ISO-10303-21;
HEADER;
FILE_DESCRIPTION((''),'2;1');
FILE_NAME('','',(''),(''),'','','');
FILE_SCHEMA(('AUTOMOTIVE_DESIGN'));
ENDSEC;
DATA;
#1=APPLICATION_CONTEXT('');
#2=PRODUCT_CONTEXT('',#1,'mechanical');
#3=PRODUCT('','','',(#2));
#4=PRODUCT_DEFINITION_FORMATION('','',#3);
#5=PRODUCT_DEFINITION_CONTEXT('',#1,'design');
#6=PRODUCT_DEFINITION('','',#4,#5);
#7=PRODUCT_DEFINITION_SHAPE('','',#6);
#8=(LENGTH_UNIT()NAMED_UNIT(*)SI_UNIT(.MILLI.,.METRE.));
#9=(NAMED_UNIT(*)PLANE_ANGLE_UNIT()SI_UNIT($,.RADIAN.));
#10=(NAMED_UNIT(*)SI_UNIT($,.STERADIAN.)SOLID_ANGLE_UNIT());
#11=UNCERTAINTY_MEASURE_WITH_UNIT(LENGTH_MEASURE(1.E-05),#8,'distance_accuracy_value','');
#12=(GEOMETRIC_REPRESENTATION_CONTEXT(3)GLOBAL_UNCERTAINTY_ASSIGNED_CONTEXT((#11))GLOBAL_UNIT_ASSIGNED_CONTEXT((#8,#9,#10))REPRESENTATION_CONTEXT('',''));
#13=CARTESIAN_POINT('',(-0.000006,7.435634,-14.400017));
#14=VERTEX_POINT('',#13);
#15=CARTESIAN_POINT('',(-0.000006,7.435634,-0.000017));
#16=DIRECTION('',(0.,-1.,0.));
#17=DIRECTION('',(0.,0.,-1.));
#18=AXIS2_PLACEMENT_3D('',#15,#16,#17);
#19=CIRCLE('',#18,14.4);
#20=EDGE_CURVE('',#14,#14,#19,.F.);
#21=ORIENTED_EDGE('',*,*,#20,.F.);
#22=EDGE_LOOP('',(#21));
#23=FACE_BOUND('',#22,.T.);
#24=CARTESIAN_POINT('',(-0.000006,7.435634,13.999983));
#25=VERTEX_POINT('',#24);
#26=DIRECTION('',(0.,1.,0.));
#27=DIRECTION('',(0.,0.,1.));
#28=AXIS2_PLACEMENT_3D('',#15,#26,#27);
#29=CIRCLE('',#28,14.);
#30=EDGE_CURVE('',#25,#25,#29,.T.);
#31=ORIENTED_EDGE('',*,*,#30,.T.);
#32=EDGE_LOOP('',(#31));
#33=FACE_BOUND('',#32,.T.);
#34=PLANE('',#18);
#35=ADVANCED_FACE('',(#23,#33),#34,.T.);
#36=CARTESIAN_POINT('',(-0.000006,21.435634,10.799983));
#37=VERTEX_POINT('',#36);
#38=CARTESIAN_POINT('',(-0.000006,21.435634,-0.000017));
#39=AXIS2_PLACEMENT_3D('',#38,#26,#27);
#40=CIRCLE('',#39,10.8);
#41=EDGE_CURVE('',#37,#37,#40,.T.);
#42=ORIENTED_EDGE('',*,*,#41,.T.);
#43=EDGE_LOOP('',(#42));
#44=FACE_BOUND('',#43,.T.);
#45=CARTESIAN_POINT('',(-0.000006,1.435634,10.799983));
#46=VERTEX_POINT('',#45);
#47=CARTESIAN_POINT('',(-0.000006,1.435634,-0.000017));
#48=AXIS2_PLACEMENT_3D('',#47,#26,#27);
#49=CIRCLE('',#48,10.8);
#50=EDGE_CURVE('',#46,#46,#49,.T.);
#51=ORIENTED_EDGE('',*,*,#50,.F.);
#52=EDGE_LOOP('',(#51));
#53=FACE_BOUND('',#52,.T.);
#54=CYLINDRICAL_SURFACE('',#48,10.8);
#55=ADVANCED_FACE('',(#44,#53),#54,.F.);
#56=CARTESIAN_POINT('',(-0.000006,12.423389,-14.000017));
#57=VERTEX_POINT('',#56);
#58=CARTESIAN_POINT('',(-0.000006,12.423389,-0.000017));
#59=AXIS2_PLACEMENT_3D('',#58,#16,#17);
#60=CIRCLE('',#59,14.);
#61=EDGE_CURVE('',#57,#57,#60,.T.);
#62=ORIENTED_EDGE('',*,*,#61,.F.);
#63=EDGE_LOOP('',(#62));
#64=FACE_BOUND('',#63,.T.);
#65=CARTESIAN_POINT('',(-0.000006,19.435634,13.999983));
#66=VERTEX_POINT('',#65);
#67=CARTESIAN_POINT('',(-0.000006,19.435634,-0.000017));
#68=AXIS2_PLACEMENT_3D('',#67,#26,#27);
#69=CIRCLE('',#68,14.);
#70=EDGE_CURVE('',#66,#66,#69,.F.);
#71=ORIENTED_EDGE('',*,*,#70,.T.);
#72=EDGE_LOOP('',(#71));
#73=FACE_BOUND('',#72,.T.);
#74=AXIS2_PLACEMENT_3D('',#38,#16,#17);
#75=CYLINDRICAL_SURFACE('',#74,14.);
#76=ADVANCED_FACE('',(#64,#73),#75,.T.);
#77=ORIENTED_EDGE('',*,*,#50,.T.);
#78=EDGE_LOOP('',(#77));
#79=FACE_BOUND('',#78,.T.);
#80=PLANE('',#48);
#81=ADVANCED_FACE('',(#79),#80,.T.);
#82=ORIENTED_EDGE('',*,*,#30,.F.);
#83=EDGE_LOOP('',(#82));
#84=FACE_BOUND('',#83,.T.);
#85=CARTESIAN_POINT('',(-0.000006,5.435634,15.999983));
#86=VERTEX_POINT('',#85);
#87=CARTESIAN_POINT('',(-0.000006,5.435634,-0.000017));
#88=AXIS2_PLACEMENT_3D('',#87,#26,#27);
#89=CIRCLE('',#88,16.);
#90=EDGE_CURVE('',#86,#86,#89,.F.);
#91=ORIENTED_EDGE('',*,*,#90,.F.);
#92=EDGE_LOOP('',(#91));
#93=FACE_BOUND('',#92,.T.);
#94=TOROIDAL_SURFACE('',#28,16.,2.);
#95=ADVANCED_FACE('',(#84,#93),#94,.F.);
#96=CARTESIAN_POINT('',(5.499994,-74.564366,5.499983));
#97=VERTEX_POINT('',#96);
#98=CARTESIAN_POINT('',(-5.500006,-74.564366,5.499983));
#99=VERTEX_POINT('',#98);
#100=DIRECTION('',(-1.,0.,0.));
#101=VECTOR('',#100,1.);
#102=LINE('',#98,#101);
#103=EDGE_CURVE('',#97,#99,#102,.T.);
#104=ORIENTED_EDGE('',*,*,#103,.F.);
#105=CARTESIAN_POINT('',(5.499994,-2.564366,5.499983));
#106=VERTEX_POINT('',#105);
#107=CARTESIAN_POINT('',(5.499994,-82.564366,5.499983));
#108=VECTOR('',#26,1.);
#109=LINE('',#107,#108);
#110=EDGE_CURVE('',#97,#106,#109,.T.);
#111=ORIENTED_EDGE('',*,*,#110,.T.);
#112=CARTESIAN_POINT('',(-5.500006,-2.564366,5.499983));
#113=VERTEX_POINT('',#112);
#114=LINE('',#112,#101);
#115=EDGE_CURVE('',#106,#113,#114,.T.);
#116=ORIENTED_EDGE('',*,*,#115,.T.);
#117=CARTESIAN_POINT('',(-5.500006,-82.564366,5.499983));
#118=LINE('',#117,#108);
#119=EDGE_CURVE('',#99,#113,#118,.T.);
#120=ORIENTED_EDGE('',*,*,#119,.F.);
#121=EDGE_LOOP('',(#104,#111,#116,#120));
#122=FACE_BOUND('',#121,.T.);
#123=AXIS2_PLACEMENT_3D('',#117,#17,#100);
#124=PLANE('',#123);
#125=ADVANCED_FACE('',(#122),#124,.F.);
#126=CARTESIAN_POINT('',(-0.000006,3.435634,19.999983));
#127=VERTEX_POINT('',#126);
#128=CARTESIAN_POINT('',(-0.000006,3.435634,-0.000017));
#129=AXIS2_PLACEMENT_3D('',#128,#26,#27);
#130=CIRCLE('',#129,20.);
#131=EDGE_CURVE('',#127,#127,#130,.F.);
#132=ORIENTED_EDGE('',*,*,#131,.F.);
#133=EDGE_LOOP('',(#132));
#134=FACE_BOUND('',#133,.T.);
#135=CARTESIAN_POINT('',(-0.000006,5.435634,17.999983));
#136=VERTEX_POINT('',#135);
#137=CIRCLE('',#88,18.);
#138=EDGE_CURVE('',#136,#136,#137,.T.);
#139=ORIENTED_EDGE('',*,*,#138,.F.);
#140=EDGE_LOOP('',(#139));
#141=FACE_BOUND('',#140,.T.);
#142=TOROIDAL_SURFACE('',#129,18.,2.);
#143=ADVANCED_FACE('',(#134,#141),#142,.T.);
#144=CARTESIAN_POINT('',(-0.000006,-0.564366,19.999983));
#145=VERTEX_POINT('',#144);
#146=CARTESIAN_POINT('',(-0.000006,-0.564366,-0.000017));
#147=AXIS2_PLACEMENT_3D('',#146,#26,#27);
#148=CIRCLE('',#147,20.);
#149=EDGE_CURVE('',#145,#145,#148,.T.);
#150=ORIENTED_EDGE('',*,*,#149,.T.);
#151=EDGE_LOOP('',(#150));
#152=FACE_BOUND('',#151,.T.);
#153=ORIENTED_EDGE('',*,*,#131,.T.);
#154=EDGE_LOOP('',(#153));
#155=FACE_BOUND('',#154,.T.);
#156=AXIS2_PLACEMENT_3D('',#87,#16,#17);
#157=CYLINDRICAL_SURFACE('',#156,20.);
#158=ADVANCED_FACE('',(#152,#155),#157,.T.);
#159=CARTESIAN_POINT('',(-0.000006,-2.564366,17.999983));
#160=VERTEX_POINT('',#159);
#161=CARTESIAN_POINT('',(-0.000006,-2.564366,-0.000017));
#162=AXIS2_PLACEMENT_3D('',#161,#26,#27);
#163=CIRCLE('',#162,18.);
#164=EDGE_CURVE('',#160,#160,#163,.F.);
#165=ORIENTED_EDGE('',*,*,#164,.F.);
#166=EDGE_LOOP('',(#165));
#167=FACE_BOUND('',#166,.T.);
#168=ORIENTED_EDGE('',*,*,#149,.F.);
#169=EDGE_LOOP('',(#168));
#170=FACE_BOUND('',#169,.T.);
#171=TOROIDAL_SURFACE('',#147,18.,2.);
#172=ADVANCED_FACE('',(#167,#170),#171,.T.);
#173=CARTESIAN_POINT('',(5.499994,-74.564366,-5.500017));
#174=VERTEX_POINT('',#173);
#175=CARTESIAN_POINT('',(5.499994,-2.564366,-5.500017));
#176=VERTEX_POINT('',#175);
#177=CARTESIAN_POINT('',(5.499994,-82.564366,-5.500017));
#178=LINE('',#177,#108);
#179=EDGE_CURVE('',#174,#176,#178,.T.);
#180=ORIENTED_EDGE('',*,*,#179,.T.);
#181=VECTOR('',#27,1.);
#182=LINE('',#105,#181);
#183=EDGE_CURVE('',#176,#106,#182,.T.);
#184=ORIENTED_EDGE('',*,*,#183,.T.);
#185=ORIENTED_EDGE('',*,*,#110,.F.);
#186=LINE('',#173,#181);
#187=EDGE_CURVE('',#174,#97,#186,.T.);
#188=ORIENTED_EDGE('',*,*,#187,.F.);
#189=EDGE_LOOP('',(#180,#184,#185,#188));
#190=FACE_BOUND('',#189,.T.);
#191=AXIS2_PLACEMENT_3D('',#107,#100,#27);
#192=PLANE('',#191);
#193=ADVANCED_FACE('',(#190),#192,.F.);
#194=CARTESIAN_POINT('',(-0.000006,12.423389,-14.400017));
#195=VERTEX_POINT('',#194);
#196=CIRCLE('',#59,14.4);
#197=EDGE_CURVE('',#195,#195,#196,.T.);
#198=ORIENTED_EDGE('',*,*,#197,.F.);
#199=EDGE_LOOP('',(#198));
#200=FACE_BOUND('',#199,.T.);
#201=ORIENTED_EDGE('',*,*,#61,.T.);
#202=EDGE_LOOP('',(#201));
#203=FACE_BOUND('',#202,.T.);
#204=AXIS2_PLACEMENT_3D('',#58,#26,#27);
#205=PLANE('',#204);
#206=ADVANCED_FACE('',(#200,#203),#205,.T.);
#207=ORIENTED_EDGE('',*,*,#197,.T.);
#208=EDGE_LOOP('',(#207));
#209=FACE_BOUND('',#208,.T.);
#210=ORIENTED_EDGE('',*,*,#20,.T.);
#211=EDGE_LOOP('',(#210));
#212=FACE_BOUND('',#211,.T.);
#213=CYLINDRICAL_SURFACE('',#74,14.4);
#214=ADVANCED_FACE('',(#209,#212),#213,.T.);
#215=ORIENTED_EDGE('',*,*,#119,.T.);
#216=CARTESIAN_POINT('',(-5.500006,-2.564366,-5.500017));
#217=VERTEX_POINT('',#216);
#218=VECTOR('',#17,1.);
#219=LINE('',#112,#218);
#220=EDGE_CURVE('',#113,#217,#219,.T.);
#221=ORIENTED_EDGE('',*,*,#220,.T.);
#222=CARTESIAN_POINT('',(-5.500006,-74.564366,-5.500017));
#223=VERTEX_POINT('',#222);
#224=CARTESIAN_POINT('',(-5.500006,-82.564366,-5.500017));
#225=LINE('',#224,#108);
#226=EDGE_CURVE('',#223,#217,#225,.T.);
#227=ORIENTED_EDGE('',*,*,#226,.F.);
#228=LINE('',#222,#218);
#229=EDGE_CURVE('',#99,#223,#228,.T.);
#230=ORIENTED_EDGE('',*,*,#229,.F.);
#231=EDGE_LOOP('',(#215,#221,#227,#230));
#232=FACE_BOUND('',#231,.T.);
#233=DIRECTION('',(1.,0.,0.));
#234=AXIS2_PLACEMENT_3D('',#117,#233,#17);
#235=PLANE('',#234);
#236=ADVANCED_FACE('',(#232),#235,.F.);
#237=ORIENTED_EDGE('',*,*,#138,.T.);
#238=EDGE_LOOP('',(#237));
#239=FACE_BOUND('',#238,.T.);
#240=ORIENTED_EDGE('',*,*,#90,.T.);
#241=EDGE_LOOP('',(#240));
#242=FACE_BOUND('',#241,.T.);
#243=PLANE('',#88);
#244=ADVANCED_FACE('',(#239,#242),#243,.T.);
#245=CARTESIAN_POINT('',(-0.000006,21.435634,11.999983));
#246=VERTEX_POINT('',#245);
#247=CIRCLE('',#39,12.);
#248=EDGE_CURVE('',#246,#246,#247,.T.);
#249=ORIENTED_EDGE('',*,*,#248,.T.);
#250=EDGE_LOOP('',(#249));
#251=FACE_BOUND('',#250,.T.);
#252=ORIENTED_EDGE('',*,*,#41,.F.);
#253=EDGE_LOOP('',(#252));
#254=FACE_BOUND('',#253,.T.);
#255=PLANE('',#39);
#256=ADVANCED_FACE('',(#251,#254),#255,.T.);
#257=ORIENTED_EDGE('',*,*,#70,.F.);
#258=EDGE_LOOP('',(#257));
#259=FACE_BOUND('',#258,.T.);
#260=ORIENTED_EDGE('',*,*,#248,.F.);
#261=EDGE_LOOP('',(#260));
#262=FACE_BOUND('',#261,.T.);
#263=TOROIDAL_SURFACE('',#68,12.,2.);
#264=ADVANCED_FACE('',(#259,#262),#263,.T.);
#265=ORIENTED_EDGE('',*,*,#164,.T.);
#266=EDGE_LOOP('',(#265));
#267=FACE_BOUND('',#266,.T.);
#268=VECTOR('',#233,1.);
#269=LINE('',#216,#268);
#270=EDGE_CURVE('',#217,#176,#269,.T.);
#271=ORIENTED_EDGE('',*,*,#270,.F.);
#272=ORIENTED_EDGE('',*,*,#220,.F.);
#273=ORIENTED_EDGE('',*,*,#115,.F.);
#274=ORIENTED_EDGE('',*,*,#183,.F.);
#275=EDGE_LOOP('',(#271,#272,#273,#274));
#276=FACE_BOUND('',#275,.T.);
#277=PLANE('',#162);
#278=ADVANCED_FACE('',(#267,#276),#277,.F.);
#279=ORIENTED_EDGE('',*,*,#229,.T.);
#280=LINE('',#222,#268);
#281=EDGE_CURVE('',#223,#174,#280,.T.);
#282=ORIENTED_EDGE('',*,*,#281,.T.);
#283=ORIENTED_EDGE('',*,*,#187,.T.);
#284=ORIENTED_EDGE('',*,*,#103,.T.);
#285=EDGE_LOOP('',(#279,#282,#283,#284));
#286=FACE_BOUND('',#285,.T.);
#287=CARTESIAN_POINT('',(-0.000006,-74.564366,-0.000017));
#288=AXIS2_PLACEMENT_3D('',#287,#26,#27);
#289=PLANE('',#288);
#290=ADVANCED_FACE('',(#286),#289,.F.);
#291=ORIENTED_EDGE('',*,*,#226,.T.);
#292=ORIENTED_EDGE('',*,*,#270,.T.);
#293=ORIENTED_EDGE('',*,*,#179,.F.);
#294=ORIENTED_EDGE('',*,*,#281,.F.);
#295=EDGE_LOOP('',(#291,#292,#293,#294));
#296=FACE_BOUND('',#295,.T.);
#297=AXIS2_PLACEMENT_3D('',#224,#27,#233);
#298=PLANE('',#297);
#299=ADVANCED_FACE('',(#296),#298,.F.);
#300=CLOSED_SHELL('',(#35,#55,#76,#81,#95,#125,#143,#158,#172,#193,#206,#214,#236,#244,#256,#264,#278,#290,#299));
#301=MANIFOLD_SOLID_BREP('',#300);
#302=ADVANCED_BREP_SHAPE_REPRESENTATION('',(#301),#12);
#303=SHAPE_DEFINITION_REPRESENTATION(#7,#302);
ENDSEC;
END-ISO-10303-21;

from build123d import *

# Parameters (mm, degrees)
SKETCH2_R           = 25
BOSS_EXTRUDE1_DEPTH = 10
SKETCH3_R           = 17.5
BOSS_EXTRUDE3_DEPTH = 20
SKETCH4_R           = 13.5
CUT_EXTRUDE1_DEPTH  = 25
SKETCH5_W           = 13.75
SKETCH5_H           = 13.75
BOSS_EXTRUDE4_DEPTH = 100
FILLET2_R           = 2.5
FILLET3_R           = 2.5
WRAP1_START         = 12.5
WRAP1_OUTLINE_R     = 18
WRAP1_OUTLINE_R_2   = 17.5
WRAP1_DEPTH         = 6.23469337
SKETCH8_W           = 13.75
SKETCH8_H           = 13.75
CUT_EXTRUDE2_DEPTH  = 5
SKETCH8_2_W         = 13.75
SKETCH8_2_H         = 13.75
CUT_EXTRUDE3_DEPTH  = 10
SCALE1_SCALE        = 0.8


# Read off the part's stored shape, not the designer's step: Wrap1
with BuildPart() as part:
    # Sketch2 → Boss-Extrude1 (new body)
    with BuildSketch(Plane(origin=(0, 0, 0), x_dir=(1, 0, 0), z_dir=(0, 1, 0))):
        with Locations(Location((0, 0, 0), (0, 0, 270))):
            Circle(SKETCH2_R)
    extrude(amount=BOSS_EXTRUDE1_DEPTH)

    # Sketch3 → Boss-Extrude3 (add)
    with BuildSketch(Plane(origin=(0, 10, 0), x_dir=(1, 0, 0), z_dir=(0, 1, 0))):
        with Locations(Location((0, 0, 0), (0, 0, 270))):
            Circle(SKETCH3_R)
    extrude(amount=BOSS_EXTRUDE3_DEPTH)

    # Sketch4 → Cut-Extrude1 (cut)
    with BuildSketch(Plane(origin=(0, 30, 0), x_dir=(1, 0, 0), z_dir=(0, 1, 0))):
        with Locations(Location((0, 0, 0), (0, 0, 270))):
            Circle(SKETCH4_R)
    extrude(amount=-CUT_EXTRUDE1_DEPTH, mode=Mode.SUBTRACT)

    # Sketch5 → Boss-Extrude4 (add)
    with BuildSketch(Plane.XZ):
        Rectangle(SKETCH5_W, SKETCH5_H)
    extrude(amount=BOSS_EXTRUDE4_DEPTH)

    # Fillet2
    fillet2_edges = [part.edges().sort_by_distance(p)[0] for p in [
        (0, 0, -25),
        (0, 10, -25),
        (0, 10, -17.5),
    ]]
    fillet(fillet2_edges, radius=FILLET2_R)

    # Fillet3
    fillet3_edges = [part.edges().sort_by_distance(p)[0] for p in [
        (0, 30, -17.5),
    ]]
    fillet(fillet3_edges, radius=FILLET3_R)

    # Wrap1 outline → Wrap1 (add)
    with BuildSketch(Plane(origin=(0, 0, 0), x_dir=(1, 0, 0), z_dir=(0, 1, 0)).offset(WRAP1_START)):
        Circle(WRAP1_OUTLINE_R)
        Circle(WRAP1_OUTLINE_R_2, mode=Mode.SUBTRACT)
    extrude(amount=WRAP1_DEPTH)

    # Sketch8 → Cut-Extrude2 (cut)
    with BuildSketch(Plane.XZ.offset(100)):
        Rectangle(SKETCH8_W, SKETCH8_H)
    extrude(amount=-CUT_EXTRUDE2_DEPTH, mode=Mode.SUBTRACT)

    # Sketch8<2> → Cut-Extrude3 (cut)
    with BuildSketch(Plane.XZ.offset(100)):
        Rectangle(SKETCH8_2_W, SKETCH8_2_H)
    extrude(amount=-CUT_EXTRUDE3_DEPTH, mode=Mode.SUBTRACT)


with BuildPart() as part_1:
    # Scale1: scaled about (0, -12.821549585, 0)
    add(part.part.scale(SCALE1_SCALE).moved(Location((0, -2.564309917, 0))))


solid = part_1.part
